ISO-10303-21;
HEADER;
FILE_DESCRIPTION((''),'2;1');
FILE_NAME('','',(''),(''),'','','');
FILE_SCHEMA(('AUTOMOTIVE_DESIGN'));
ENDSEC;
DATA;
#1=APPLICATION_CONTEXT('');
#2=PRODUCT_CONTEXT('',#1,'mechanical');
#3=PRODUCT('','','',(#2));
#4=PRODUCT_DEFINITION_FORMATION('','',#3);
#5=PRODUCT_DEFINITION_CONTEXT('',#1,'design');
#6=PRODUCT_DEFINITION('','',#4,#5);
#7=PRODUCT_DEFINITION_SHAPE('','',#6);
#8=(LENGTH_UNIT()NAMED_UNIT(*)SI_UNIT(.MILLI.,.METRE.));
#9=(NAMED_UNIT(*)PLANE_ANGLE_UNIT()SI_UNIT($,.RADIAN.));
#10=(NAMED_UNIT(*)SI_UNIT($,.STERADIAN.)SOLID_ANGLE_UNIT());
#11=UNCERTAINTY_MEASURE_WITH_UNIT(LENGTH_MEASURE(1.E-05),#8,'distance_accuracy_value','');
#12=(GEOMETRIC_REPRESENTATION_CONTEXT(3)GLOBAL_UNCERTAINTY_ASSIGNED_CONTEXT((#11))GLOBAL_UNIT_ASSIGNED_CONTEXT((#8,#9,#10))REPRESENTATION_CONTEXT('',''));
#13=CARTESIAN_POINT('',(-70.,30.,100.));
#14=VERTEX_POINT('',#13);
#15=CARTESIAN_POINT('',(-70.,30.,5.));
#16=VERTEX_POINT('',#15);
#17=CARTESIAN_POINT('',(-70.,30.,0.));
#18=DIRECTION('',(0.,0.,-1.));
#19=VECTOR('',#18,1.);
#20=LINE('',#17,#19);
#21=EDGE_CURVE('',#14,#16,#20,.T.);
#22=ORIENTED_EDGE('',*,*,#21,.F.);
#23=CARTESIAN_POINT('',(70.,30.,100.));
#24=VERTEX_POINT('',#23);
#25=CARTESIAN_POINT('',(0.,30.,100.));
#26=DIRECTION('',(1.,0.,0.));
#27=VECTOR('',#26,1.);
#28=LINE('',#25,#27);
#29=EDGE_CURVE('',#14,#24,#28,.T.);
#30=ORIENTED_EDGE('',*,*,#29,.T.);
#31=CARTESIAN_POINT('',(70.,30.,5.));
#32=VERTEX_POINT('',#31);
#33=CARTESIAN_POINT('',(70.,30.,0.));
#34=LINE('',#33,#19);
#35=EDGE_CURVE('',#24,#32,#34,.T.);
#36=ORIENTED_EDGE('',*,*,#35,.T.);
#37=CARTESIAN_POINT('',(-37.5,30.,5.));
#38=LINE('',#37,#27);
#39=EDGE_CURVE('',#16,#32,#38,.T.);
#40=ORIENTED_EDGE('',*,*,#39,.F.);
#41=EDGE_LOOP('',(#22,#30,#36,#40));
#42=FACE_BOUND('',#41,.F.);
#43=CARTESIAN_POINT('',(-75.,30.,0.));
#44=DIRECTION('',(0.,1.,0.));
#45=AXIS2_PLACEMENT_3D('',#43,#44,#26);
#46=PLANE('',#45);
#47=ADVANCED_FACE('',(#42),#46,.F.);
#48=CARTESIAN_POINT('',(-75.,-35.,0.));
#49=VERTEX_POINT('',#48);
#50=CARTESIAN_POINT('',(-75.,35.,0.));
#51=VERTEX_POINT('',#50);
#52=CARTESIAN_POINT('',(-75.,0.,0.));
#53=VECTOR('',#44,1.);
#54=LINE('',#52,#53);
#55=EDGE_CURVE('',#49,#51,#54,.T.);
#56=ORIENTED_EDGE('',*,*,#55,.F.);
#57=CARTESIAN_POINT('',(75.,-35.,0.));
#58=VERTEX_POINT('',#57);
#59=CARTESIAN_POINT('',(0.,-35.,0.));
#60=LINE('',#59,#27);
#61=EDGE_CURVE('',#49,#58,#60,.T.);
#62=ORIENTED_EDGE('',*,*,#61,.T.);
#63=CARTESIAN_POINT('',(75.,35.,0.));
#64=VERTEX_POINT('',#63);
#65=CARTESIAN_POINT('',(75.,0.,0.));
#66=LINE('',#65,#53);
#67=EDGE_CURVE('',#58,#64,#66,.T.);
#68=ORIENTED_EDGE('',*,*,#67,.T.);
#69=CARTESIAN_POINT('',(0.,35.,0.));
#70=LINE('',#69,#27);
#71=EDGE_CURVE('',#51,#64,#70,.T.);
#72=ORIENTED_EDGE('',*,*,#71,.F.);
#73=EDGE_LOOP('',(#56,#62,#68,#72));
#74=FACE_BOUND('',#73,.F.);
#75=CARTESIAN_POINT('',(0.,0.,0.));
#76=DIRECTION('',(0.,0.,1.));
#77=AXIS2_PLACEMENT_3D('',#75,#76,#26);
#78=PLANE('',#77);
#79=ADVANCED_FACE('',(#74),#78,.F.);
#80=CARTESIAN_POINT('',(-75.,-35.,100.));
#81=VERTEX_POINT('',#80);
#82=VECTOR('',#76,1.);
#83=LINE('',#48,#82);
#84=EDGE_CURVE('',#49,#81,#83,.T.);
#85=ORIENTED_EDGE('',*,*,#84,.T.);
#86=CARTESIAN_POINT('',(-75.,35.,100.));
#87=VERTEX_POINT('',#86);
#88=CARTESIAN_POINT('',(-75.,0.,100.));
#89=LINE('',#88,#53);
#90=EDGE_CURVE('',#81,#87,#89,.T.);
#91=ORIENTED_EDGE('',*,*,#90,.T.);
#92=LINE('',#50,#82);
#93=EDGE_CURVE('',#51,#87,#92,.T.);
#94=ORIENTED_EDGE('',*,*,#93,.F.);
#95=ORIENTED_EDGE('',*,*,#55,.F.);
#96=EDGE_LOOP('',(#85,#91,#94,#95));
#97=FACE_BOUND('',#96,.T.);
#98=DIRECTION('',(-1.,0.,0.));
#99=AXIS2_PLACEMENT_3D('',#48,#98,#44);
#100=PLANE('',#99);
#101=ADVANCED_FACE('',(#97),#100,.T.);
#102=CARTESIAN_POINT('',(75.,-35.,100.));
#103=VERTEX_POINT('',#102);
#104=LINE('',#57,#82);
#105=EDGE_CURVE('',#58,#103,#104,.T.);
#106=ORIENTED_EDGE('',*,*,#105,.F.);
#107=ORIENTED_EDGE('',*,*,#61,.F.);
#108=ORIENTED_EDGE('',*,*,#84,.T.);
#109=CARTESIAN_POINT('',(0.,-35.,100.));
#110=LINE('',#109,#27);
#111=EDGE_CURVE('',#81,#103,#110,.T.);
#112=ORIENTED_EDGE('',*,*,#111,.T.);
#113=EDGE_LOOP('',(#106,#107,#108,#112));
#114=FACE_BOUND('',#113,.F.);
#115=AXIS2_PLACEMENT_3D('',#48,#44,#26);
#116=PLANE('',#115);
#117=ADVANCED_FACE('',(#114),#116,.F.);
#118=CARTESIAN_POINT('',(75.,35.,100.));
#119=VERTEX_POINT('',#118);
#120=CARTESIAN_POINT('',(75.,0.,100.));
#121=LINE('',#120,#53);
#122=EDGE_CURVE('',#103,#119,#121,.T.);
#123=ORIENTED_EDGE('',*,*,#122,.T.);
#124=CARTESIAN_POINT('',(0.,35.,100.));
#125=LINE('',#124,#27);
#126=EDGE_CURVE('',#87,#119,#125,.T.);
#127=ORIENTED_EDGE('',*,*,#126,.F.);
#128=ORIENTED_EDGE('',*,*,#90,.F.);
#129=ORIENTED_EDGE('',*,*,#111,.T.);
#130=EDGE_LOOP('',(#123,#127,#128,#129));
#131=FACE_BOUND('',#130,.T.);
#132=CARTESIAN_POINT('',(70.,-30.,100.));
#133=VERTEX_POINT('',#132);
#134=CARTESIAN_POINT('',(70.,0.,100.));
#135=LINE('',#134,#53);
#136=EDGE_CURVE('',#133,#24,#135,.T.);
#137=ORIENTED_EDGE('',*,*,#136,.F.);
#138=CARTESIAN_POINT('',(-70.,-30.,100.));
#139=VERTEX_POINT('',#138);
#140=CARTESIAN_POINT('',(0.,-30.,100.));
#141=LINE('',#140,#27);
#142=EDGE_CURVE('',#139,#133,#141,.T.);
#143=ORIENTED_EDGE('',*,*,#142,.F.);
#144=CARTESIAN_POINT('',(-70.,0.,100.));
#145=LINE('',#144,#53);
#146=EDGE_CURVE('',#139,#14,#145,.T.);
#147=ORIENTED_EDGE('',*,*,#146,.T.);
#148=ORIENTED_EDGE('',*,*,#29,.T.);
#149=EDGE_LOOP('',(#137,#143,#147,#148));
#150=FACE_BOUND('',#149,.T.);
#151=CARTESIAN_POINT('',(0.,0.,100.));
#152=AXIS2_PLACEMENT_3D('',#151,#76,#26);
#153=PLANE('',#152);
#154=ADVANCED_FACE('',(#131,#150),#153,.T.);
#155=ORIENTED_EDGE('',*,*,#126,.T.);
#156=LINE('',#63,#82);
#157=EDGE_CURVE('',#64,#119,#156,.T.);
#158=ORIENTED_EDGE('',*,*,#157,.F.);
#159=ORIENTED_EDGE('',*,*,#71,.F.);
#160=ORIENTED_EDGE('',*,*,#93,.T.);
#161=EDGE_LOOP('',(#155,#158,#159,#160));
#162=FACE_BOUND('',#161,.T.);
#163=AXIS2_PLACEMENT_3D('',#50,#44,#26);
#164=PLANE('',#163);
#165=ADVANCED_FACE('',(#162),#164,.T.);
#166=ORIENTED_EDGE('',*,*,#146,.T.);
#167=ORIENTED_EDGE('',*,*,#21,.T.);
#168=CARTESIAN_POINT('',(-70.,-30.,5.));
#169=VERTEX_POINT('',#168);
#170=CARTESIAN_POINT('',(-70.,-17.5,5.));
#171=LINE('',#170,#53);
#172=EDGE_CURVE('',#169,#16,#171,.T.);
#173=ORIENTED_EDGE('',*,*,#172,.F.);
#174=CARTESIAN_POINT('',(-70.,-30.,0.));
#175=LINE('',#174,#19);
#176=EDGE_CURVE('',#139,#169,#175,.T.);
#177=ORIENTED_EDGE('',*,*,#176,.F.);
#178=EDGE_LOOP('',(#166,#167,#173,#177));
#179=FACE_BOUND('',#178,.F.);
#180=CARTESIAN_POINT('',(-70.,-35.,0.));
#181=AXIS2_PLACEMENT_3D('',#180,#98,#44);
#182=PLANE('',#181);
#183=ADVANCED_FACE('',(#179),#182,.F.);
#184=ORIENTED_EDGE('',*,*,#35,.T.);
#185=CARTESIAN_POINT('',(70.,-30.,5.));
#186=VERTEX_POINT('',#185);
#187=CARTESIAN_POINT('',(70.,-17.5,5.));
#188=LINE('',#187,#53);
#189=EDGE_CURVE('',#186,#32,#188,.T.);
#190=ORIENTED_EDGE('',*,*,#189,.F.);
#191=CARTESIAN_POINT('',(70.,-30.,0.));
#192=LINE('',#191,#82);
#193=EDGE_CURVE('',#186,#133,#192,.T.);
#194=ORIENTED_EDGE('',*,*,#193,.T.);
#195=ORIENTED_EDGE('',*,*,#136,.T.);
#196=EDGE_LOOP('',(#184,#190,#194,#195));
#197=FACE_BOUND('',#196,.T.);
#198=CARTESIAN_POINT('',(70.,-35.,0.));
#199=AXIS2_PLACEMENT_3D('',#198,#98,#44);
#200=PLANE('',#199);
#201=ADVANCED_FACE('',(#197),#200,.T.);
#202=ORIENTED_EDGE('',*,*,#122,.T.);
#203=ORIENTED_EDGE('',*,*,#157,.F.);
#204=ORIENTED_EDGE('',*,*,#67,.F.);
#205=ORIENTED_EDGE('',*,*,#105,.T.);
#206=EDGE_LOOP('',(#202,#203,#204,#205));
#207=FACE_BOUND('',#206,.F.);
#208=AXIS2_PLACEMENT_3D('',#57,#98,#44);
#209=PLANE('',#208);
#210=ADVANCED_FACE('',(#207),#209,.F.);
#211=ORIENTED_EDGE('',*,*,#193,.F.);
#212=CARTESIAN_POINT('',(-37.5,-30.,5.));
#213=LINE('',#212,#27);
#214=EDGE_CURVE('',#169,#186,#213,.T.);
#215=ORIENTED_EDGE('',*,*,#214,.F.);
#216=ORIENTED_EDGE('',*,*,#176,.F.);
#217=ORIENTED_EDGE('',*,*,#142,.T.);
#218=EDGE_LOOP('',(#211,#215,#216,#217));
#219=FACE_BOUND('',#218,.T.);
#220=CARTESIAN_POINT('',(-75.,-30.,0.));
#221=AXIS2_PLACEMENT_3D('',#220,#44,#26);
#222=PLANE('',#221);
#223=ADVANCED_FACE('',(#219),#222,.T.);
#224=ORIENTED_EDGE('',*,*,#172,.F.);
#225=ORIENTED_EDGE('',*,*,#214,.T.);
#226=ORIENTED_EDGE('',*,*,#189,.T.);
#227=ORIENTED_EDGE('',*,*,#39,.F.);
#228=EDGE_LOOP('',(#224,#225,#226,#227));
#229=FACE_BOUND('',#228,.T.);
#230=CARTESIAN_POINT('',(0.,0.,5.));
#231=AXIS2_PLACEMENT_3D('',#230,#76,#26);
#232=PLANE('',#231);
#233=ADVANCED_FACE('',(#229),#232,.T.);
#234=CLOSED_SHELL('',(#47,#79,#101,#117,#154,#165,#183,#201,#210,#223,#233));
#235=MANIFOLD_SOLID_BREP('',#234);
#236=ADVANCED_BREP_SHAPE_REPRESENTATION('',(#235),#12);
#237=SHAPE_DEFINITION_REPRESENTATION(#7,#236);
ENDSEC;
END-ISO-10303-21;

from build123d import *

# Parameters (mm, degrees)
F0_W     = 150
F0_H     = 70
F1_DEPTH = 100
F2_T     = -5


# Not quite as in the source:
# - the program builds the solid bodies; features that only make, move or delete a surface that nothing else refers to are left out


with BuildPart() as f1:
    # F0 (on Top) → F1 (new body)
    with BuildSketch(Plane.XY):
        Rectangle(F0_W, F0_H)
    extrude(amount=F1_DEPTH)

    # F2
    f2_openings = [f1.faces().sort_by_distance(p)[0] for p in [
        (0, 0, 100),
    ]]
    offset(amount=F2_T, openings=f2_openings)


solid = f1.part
